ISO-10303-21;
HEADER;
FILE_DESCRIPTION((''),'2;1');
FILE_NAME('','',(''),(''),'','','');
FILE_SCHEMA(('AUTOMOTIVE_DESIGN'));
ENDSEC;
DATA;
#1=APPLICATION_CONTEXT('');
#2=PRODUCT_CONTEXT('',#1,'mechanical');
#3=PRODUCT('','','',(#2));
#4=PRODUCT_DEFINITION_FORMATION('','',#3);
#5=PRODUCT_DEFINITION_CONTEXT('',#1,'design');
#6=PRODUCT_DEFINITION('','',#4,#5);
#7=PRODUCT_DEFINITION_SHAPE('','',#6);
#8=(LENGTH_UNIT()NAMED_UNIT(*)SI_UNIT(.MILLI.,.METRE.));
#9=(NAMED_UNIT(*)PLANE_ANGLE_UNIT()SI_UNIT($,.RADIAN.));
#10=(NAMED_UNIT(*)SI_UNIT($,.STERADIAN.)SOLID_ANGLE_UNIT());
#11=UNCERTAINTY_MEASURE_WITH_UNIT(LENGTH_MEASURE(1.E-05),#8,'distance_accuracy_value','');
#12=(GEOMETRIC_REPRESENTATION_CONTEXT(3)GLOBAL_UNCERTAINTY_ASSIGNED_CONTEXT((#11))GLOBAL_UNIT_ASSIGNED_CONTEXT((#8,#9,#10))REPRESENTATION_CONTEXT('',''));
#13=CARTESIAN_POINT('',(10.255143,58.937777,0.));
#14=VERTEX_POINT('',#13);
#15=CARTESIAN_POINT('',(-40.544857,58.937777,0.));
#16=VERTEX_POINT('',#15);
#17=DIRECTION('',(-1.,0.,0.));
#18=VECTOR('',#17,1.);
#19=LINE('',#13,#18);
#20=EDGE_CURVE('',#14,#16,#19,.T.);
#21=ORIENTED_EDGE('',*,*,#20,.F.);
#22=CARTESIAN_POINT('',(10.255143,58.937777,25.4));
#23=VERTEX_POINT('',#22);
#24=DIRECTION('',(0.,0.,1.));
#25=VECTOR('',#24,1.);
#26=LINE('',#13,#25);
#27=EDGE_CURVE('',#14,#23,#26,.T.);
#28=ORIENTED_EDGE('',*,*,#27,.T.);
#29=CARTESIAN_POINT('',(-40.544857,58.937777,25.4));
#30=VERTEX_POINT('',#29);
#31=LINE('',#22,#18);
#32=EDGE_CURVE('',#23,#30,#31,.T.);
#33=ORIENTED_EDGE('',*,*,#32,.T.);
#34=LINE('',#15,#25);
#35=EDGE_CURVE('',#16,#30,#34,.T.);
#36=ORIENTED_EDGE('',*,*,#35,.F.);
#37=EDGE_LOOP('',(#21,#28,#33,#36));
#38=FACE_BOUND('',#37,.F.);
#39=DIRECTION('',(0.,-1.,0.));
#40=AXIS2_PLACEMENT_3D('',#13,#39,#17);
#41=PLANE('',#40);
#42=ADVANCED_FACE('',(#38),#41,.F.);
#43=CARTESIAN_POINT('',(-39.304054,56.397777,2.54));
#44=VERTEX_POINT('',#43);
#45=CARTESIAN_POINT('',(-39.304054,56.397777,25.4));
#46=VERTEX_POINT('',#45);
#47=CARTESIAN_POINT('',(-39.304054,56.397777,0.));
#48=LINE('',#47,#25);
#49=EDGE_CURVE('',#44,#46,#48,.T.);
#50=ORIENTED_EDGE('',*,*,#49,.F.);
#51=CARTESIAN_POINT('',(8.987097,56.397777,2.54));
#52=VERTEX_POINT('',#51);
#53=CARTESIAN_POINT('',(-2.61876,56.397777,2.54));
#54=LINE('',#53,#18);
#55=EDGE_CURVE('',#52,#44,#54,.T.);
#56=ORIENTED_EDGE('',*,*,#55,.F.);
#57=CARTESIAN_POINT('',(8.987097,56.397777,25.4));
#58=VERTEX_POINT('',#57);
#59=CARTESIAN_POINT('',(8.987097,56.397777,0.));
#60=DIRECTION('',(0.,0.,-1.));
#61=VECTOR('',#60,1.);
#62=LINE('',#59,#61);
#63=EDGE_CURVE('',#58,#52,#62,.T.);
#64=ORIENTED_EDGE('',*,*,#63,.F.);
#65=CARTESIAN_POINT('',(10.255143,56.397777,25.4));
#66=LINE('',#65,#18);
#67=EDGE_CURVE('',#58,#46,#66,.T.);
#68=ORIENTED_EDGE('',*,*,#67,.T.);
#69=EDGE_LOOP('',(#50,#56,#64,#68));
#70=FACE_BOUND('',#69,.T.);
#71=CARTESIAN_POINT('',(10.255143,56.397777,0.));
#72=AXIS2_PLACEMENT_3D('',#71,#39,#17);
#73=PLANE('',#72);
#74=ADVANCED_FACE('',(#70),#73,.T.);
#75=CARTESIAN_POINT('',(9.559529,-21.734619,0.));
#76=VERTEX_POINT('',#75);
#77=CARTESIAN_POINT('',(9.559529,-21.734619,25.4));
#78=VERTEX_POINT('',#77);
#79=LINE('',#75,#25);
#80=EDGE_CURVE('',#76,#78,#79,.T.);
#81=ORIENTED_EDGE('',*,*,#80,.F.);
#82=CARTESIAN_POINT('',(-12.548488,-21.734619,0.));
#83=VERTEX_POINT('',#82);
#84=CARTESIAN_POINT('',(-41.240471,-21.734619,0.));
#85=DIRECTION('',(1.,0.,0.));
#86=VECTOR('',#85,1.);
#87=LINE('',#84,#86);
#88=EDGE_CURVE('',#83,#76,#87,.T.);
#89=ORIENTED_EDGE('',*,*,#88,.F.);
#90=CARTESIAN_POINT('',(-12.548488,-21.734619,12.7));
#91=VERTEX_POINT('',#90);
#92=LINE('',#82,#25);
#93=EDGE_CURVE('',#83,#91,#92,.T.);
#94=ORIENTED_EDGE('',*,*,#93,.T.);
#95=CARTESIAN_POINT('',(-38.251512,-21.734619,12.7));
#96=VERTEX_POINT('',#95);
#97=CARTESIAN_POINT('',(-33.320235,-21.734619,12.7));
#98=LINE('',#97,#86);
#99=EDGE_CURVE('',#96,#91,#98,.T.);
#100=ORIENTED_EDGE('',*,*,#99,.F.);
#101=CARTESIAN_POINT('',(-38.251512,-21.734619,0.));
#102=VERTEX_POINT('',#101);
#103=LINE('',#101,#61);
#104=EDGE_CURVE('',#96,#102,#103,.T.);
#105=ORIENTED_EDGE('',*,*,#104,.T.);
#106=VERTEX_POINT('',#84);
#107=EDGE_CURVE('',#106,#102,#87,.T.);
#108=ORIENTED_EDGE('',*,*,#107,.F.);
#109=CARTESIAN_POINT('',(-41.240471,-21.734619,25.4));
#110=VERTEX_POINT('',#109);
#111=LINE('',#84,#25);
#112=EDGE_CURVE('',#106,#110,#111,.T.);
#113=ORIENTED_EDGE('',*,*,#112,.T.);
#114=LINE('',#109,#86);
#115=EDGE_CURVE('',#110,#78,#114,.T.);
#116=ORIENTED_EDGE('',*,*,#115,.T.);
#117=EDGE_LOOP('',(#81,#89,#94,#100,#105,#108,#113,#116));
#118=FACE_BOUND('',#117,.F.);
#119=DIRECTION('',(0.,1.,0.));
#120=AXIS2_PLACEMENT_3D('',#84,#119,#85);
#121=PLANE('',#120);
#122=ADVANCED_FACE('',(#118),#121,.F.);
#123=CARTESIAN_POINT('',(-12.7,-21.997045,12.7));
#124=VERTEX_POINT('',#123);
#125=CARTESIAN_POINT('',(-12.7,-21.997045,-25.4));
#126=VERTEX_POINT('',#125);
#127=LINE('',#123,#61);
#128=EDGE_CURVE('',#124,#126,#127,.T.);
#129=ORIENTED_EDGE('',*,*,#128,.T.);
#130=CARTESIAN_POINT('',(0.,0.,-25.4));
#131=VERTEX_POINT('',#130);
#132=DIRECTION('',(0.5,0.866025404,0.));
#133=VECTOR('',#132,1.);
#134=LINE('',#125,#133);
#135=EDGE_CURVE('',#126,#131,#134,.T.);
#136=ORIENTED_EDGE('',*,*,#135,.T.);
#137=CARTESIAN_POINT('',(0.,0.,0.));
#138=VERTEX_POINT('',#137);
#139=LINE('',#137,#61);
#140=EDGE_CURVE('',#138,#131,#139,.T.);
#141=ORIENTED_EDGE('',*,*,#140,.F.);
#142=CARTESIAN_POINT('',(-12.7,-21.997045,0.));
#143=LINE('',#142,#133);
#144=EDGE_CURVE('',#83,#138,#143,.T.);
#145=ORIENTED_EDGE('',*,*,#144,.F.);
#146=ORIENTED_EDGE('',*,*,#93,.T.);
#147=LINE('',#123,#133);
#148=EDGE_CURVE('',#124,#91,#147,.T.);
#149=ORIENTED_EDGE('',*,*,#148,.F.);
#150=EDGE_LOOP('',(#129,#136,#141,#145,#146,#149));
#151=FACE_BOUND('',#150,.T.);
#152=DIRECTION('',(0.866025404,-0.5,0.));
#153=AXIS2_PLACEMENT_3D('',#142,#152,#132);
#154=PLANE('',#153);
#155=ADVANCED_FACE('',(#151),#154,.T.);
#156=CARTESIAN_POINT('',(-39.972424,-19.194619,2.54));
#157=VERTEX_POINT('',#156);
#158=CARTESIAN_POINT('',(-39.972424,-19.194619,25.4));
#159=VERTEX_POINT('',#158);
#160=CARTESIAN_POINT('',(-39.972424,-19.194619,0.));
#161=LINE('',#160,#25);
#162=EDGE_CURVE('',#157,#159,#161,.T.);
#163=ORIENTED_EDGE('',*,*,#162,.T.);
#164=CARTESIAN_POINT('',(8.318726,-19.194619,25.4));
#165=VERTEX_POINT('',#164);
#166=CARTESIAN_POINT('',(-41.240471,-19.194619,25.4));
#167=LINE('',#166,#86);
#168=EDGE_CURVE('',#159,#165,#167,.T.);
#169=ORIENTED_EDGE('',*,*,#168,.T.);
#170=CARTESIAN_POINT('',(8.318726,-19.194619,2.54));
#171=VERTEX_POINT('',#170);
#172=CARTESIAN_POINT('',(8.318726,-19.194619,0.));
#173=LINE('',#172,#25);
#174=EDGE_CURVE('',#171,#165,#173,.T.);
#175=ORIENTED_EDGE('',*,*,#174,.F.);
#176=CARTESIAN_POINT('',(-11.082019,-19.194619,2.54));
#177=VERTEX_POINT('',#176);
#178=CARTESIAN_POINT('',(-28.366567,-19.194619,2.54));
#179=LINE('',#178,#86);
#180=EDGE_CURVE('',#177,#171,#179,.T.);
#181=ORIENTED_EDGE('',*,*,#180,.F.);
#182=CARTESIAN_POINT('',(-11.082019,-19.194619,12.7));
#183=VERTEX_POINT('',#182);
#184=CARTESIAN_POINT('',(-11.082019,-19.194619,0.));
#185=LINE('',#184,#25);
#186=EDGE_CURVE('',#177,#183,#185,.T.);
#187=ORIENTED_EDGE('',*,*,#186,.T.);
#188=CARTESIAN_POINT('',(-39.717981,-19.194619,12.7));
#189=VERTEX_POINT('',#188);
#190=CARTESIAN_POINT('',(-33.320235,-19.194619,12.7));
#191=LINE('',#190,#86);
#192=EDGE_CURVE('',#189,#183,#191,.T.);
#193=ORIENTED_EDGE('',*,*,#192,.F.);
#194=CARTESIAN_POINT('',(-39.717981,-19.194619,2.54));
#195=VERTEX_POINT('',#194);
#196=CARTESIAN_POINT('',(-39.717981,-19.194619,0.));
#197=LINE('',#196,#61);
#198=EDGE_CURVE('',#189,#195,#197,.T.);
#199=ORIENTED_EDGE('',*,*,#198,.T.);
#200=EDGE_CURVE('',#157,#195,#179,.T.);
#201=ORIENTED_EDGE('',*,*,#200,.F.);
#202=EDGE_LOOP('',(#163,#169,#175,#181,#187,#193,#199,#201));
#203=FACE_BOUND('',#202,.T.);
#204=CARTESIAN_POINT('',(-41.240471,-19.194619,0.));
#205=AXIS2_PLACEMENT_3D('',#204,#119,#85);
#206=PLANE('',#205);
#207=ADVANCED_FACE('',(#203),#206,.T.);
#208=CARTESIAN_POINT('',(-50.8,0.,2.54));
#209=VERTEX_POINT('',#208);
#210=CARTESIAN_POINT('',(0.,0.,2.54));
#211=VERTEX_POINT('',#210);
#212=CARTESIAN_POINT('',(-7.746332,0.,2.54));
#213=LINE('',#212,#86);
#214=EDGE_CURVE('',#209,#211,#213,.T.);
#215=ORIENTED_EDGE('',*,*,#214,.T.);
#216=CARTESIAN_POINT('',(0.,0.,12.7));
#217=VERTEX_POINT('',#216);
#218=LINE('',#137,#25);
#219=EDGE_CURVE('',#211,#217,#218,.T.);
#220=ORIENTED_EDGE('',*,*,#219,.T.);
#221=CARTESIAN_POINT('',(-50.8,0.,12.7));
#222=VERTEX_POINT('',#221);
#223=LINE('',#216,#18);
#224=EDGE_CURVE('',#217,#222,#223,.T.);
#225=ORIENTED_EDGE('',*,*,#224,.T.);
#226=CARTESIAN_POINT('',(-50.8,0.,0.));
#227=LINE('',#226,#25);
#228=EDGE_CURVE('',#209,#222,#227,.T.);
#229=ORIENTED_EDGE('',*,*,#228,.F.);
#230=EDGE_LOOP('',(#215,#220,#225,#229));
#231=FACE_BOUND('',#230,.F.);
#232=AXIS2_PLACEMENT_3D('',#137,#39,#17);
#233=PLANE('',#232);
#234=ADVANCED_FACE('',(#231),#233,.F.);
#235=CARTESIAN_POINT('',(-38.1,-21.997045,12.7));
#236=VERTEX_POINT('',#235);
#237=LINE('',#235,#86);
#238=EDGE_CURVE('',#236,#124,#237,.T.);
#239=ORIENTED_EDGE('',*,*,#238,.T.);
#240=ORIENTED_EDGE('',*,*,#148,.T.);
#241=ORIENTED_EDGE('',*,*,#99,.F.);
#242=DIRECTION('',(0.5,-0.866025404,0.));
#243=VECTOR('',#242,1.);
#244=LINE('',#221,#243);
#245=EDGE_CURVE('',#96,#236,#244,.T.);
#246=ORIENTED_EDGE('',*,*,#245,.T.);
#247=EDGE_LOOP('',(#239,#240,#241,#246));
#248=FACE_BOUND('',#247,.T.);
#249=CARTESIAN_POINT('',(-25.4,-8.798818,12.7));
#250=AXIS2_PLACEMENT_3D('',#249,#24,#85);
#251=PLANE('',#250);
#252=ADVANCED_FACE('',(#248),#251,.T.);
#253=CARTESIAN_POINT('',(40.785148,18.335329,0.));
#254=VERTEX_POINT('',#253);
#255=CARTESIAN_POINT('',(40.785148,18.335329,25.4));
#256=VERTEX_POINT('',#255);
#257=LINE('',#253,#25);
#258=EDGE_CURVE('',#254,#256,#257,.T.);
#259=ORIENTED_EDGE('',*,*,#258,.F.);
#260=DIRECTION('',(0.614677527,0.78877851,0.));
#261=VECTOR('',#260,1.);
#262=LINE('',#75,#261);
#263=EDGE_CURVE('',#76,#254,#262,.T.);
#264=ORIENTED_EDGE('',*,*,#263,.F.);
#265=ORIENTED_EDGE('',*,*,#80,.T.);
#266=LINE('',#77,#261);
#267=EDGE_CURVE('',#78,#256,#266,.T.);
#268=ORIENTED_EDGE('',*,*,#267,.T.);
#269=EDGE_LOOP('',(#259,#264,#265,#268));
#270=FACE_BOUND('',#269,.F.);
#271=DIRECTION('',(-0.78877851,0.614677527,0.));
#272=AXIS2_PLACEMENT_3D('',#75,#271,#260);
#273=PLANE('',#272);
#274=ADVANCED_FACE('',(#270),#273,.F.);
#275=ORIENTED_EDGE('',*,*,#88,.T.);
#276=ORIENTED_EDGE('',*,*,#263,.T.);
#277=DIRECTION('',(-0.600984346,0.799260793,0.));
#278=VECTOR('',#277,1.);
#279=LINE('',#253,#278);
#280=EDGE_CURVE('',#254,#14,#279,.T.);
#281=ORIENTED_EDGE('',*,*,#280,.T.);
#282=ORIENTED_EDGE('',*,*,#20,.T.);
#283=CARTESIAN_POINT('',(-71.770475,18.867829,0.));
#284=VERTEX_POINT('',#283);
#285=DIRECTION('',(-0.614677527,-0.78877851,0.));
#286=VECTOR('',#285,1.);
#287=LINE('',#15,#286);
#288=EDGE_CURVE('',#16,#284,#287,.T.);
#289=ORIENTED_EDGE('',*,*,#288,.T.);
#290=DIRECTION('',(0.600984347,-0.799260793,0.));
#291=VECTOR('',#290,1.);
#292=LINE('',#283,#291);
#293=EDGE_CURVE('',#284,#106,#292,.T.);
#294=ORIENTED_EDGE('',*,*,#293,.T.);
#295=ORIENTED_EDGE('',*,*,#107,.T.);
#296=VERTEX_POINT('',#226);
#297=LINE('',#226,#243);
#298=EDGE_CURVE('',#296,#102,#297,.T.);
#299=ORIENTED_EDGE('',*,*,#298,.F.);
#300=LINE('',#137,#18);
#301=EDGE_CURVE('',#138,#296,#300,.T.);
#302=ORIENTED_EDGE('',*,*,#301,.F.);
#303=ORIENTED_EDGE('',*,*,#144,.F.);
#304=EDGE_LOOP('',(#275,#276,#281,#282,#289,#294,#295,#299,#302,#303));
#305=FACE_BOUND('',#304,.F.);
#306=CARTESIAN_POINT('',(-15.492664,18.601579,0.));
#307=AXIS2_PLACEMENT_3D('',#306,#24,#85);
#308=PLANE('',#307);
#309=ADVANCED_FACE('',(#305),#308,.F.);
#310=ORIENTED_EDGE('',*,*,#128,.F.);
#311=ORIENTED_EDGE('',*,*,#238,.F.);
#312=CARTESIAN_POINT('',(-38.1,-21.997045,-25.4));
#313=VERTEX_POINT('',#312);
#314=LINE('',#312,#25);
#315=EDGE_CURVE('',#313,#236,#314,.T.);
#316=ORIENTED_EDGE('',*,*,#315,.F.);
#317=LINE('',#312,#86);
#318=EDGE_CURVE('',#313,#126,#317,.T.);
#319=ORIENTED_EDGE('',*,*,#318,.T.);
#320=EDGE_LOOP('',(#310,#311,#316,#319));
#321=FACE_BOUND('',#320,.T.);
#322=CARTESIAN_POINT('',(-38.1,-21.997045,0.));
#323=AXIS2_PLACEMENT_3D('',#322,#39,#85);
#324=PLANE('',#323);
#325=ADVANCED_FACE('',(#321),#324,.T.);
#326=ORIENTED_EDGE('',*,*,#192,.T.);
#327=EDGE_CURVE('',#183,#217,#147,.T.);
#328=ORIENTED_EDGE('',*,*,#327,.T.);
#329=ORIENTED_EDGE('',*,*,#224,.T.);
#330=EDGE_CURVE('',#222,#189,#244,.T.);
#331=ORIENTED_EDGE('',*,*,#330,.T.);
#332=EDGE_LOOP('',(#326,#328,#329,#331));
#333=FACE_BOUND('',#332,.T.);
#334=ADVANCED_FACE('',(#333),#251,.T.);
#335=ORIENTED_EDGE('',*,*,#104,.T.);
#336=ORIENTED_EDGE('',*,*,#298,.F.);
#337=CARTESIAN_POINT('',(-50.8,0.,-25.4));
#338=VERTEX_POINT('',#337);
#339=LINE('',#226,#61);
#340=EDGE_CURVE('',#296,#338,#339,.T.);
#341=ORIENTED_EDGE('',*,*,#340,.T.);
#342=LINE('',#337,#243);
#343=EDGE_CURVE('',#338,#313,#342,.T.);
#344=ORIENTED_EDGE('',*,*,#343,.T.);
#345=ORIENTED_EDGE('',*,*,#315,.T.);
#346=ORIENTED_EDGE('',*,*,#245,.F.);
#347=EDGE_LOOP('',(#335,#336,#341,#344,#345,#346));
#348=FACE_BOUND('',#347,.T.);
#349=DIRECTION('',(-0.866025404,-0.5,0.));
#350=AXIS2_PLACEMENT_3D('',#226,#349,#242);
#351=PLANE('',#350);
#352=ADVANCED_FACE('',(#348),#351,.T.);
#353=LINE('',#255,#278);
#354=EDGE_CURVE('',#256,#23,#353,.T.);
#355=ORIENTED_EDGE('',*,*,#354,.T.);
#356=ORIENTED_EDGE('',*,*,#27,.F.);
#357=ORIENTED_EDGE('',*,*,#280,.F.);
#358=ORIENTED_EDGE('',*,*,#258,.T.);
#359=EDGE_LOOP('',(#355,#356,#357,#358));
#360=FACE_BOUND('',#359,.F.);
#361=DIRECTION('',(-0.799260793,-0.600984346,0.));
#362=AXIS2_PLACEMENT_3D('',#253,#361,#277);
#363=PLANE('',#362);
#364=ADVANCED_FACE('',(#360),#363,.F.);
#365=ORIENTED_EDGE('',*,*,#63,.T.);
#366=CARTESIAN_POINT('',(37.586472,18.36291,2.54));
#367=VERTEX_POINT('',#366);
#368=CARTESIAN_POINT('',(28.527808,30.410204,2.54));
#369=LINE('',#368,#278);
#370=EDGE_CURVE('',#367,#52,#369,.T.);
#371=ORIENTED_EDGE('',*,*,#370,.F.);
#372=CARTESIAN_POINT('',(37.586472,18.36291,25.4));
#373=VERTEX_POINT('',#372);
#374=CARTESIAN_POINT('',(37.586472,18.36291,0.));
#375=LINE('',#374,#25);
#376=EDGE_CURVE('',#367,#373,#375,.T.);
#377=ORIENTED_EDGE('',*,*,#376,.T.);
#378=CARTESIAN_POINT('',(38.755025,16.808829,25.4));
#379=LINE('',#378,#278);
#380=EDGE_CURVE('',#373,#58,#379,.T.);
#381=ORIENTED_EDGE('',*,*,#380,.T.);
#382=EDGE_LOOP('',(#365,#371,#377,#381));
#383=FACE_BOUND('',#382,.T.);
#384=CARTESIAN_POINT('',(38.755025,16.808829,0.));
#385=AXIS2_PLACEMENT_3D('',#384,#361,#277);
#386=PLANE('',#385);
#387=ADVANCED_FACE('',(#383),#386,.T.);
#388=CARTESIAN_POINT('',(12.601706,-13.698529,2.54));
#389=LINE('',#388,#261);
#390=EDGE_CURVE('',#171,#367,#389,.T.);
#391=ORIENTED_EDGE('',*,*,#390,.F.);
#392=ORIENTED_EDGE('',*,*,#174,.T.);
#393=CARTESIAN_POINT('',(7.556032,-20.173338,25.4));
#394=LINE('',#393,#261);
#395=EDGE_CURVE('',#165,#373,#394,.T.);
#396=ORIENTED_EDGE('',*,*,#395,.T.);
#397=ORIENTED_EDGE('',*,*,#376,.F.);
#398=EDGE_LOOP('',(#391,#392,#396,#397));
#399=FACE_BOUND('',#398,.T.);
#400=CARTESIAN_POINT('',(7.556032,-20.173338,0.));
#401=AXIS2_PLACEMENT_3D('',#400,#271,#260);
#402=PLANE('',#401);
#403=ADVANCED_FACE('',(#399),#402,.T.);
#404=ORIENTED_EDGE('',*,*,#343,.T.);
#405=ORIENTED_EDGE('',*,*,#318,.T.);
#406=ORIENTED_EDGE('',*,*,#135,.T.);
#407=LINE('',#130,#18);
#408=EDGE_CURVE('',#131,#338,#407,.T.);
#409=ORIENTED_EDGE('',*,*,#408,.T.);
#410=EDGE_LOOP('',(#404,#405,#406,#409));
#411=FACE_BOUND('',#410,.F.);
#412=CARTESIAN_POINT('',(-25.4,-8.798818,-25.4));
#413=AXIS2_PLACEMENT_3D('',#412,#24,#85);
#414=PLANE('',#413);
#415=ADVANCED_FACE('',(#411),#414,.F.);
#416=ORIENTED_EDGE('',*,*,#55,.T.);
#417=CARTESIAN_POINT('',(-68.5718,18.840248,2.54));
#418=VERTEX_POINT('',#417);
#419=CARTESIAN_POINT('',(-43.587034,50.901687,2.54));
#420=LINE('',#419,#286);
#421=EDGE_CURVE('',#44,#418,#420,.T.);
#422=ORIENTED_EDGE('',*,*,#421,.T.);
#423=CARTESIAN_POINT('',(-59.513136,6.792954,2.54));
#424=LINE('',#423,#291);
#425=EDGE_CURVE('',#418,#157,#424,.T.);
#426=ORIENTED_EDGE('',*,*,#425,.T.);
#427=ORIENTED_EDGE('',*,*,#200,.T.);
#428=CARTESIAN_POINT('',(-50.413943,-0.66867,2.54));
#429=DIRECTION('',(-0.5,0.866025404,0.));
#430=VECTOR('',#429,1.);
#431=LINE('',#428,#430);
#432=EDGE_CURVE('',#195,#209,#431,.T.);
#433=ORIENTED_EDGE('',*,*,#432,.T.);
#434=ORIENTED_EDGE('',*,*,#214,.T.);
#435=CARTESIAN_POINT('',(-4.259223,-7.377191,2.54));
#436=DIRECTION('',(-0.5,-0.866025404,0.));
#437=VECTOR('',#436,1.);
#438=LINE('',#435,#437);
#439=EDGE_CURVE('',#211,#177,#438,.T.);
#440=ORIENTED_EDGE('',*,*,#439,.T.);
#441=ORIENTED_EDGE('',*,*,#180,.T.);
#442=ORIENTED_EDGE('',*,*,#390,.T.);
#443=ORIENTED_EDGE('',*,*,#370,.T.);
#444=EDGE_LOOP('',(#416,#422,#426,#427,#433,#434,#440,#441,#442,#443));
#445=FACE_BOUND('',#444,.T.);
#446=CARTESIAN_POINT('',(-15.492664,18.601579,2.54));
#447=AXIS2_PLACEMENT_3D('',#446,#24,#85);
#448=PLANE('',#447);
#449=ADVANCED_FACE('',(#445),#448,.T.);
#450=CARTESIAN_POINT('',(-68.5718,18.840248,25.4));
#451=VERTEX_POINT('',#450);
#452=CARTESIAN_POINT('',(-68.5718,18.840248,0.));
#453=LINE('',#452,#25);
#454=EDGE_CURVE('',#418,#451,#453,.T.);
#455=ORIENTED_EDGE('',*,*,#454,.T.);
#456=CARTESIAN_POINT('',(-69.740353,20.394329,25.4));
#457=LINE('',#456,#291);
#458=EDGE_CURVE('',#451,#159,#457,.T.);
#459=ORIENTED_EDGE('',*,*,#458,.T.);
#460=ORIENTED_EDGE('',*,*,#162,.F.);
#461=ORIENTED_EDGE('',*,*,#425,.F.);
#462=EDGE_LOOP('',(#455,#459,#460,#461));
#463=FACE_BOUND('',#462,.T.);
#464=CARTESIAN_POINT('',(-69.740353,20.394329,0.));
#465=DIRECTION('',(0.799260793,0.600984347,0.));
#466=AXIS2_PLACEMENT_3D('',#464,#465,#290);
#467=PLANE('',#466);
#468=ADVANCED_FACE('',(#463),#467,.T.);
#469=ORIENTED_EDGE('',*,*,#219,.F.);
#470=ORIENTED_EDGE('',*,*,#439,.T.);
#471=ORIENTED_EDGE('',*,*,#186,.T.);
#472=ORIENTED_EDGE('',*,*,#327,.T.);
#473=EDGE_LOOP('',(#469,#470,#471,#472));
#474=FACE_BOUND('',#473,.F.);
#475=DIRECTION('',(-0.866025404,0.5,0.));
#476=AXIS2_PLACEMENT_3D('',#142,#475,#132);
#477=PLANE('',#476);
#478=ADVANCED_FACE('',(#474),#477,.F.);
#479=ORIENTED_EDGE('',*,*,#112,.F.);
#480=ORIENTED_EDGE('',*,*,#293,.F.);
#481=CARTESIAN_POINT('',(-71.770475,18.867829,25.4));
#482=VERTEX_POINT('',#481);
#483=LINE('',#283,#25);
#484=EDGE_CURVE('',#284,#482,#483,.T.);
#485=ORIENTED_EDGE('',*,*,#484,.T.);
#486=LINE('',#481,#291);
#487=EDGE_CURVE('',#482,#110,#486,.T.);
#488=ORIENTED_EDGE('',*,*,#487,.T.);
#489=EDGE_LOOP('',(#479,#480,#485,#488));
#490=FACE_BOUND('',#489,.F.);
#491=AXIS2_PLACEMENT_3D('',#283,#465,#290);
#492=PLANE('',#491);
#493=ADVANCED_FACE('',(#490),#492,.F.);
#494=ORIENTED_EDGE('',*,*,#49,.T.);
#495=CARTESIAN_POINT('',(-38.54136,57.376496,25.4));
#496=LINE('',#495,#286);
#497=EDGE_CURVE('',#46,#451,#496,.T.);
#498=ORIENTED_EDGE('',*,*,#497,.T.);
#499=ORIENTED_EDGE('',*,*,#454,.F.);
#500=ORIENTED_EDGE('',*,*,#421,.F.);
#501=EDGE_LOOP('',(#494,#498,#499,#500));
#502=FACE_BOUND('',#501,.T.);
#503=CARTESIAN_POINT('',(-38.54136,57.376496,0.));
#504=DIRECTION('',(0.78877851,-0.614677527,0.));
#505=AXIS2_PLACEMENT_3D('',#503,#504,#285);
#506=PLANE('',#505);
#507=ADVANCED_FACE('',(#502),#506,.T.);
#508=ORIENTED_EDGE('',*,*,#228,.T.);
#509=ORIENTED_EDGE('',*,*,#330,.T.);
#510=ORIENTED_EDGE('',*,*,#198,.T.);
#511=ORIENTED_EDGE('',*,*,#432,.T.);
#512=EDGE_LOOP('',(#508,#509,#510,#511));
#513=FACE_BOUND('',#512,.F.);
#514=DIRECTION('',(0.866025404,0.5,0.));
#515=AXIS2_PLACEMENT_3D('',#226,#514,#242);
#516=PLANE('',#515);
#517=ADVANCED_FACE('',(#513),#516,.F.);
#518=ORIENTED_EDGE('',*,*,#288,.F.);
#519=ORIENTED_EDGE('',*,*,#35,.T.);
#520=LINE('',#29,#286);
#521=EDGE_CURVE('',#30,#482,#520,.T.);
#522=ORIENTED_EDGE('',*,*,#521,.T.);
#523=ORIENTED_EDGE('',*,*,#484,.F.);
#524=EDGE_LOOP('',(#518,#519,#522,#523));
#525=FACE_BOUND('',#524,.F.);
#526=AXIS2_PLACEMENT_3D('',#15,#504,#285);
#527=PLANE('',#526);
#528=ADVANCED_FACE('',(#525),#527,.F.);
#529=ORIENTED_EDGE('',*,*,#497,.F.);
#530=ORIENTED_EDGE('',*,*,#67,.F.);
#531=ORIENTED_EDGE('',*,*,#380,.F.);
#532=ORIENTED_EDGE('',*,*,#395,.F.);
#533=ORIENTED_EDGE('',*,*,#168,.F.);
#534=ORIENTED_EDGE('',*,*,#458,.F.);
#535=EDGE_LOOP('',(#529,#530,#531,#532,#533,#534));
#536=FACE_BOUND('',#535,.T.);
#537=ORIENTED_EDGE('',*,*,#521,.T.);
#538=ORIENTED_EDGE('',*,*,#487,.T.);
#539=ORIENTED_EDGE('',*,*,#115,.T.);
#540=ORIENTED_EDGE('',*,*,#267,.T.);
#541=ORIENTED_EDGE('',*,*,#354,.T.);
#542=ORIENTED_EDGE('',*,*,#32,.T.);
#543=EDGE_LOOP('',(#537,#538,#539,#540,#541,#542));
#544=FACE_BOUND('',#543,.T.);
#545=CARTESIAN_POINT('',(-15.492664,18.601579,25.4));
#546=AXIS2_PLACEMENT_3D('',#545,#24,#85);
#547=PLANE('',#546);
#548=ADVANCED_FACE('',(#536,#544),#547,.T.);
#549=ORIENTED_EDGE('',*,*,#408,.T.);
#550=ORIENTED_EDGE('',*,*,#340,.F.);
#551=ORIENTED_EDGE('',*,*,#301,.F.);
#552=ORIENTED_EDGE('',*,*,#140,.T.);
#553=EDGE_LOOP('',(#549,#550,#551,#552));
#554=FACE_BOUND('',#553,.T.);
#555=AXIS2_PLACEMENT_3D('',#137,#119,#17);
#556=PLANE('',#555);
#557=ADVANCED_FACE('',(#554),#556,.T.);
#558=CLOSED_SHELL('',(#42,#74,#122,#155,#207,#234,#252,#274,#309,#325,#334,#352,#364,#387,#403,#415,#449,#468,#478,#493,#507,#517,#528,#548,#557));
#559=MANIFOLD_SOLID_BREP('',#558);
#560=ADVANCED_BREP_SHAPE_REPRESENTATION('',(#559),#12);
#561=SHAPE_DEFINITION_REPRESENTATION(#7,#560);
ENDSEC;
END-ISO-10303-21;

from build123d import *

# Parameters (mm, degrees)
F1_DEPTH      = 25.4
F2_T          = -2.54
F8_DEPTH      = 12.7
F8_DEPTH_BACK = 25.4


# Not quite as in the source:
# - the program builds the solid bodies; features that only make, move or delete a surface that nothing else refers to are left out


with BuildPart() as f1:
    # F0 (on Top) → F1 (new body)
    with BuildSketch(Plane.XY):
        Polygon((10.2551429075, 58.9377772835), (-40.5448570925, 58.9377772835), (-71.7704754875, 18.8678289949), (-41.2404706852, -21.7346192906), (9.5595293148, -21.7346192906), (40.7851477097, 18.335328998), align=None)
    extrude(amount=F1_DEPTH)

    # F2
    f2_openings = [f1.faces().sort_by_distance(p)[0] for p in [
        (-15.492664, 18.601579, 25.4),
    ]]
    offset(amount=F2_T, openings=f2_openings)

    # F7 (on Top) → F8 (join, two sides)
    with BuildSketch(Plane.XY) as f8_sk:
        Polygon((0, 0), (-50.8, 0), (-38.1, -21.9970452561), (-12.7, -21.9970452561), align=None)
    extrude(amount=F8_DEPTH)
    extrude(f8_sk.sketch, amount=-F8_DEPTH_BACK)


solid = f1.part
